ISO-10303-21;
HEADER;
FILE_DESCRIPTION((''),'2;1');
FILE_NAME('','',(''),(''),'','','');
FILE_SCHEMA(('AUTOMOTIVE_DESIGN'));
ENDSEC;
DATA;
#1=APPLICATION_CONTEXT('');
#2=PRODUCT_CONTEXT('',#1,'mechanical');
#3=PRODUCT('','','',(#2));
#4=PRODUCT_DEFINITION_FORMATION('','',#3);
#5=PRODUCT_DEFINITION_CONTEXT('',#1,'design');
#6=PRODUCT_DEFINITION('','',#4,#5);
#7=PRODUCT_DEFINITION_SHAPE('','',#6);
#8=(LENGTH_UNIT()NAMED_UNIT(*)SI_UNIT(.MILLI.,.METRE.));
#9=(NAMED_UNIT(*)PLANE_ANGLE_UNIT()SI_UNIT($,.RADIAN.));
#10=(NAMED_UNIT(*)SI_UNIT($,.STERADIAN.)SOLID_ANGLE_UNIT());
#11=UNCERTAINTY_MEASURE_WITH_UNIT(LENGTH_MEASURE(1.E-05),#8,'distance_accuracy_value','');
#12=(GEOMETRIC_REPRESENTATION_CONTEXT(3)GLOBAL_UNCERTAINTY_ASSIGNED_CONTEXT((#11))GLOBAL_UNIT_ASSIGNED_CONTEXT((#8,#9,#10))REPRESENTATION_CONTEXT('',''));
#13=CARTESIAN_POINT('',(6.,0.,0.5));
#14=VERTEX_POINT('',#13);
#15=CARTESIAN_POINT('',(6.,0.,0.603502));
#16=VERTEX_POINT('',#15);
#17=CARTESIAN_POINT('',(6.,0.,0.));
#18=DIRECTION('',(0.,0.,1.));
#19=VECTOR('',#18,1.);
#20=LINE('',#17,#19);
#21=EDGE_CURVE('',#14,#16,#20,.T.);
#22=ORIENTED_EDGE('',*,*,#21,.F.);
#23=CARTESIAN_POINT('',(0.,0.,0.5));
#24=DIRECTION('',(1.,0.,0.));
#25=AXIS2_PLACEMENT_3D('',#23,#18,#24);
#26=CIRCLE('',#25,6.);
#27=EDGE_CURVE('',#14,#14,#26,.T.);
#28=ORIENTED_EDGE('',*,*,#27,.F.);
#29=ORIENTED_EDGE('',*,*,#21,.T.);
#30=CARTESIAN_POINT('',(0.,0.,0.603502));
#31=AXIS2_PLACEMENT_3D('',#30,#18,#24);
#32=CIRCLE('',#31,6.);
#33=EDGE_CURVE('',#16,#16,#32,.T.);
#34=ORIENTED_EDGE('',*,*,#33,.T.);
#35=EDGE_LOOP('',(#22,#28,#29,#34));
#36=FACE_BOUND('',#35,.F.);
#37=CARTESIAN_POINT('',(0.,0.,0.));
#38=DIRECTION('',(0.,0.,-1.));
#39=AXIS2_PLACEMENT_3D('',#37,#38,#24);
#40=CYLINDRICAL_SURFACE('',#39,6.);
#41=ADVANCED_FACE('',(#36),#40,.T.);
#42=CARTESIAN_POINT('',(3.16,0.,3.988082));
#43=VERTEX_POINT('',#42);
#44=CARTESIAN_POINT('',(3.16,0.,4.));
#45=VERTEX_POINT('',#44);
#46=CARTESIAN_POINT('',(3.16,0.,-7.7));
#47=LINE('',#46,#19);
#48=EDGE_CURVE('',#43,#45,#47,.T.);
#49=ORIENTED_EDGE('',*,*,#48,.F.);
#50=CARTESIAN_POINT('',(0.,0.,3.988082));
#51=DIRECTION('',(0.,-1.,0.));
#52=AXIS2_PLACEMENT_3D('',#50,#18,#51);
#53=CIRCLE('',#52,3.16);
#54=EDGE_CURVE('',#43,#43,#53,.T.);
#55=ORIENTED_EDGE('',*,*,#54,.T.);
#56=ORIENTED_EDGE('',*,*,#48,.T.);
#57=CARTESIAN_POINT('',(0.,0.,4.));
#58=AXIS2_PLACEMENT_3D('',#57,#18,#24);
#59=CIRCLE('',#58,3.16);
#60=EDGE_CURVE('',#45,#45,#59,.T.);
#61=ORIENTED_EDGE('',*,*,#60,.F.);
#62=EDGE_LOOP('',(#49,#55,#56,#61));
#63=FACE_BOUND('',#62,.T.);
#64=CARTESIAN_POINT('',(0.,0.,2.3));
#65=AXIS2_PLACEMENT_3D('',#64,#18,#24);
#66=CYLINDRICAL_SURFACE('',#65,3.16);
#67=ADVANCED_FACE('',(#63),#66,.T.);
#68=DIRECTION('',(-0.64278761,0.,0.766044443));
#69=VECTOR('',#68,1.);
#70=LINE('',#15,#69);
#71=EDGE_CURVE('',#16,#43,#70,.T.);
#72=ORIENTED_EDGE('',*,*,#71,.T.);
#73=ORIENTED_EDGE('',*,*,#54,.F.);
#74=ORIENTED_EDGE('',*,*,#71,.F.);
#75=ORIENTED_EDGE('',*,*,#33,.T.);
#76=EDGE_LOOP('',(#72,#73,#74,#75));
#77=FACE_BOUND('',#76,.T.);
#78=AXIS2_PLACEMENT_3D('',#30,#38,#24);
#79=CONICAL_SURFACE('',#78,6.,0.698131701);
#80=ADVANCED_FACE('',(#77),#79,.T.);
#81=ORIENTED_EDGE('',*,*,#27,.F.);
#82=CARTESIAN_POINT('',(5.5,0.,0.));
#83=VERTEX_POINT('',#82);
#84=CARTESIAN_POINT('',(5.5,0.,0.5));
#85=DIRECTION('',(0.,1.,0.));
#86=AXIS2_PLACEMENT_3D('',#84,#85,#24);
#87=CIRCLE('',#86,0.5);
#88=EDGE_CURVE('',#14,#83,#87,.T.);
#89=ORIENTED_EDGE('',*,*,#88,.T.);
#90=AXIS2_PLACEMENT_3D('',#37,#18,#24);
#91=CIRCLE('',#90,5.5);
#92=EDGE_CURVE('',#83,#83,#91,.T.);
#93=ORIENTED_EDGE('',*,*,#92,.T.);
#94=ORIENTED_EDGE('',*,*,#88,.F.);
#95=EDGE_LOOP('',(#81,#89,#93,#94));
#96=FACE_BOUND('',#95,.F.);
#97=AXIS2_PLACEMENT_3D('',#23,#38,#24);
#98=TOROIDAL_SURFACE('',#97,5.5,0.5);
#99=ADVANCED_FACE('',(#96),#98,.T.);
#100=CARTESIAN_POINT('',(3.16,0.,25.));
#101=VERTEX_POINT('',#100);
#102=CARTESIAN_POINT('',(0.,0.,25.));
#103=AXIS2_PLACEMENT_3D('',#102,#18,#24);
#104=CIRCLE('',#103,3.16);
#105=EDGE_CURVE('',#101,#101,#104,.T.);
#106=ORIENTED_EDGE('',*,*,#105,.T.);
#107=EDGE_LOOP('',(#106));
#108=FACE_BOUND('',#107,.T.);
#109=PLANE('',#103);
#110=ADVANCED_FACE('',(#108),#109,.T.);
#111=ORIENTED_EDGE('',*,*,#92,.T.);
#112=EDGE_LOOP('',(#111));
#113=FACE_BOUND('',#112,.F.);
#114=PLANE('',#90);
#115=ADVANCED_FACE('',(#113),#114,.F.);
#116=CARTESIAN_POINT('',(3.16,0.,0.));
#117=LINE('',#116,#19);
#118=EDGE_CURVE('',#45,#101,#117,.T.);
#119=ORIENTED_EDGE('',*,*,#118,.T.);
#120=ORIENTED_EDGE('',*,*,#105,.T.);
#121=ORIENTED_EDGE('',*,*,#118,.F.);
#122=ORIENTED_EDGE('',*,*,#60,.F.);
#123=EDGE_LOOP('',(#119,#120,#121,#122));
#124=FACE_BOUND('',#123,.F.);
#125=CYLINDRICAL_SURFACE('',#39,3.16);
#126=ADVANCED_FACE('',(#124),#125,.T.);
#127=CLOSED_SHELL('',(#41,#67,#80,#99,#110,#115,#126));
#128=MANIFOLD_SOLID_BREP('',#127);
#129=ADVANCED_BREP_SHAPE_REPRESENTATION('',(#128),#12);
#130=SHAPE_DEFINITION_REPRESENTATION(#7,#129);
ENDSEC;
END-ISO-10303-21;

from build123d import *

# Parameters (mm, degrees)
F0_R        = 6
F0_R_2      = 3.16
F1_DEPTH    = 4
F2_DEPTH    = 25
F3_S5_R     = 3.16
F3_T6_DEPTH = 10
F4_R        = 0.5


# Not quite as in the source:
# - a fillet or chamfer that OpenCascade refuses, or shapes differently, is made with other operations: its cross-section is extruded or revolved along the edge and cut away or added


with BuildPart() as f1:
    # F0 (on Top) → F1 (new body)
    with BuildSketch(Plane.XY):
        Circle(F0_R)
        Circle(F0_R_2, mode=Mode.SUBTRACT)
    extrude(amount=F1_DEPTH)

    # F0 (on Top) → F2 (join)
    with BuildSketch(Plane.XY):
        Circle(F0_R_2)
    extrude(amount=F2_DEPTH)

    # F3: chamfer of 2.85 x 3.3964977389 on 1 edges, made by hand


with BuildPart() as f3_tool2:
    # F3_s3 → F3_t4 (revolve)
    with BuildSketch(Plane.XZ):
        Polygon((6, 0.6035022611), (3.15, 4), (6, 4), align=None)
    revolve(axis=Axis((0, 0, 4), (0, 0, 1)))

    # F3_s5 → F3_t6 (cut, symmetric)
    with BuildSketch(Plane.XY.offset(2.3)):
        Circle(F3_S5_R)
    extrude(amount=F3_T6_DEPTH, both=True, mode=Mode.SUBTRACT)


with BuildPart() as f1_1:
    add(f1.part)

    # F3_t1: cut F3_tool2
    add(f3_tool2.part, mode=Mode.SUBTRACT)

    # F4
    f4_edges = [f1_1.edges().sort_by_distance(p)[0] for p in [
        (-6, 0, 0),
    ]]
    fillet(f4_edges, radius=F4_R)


solid = f1_1.part
